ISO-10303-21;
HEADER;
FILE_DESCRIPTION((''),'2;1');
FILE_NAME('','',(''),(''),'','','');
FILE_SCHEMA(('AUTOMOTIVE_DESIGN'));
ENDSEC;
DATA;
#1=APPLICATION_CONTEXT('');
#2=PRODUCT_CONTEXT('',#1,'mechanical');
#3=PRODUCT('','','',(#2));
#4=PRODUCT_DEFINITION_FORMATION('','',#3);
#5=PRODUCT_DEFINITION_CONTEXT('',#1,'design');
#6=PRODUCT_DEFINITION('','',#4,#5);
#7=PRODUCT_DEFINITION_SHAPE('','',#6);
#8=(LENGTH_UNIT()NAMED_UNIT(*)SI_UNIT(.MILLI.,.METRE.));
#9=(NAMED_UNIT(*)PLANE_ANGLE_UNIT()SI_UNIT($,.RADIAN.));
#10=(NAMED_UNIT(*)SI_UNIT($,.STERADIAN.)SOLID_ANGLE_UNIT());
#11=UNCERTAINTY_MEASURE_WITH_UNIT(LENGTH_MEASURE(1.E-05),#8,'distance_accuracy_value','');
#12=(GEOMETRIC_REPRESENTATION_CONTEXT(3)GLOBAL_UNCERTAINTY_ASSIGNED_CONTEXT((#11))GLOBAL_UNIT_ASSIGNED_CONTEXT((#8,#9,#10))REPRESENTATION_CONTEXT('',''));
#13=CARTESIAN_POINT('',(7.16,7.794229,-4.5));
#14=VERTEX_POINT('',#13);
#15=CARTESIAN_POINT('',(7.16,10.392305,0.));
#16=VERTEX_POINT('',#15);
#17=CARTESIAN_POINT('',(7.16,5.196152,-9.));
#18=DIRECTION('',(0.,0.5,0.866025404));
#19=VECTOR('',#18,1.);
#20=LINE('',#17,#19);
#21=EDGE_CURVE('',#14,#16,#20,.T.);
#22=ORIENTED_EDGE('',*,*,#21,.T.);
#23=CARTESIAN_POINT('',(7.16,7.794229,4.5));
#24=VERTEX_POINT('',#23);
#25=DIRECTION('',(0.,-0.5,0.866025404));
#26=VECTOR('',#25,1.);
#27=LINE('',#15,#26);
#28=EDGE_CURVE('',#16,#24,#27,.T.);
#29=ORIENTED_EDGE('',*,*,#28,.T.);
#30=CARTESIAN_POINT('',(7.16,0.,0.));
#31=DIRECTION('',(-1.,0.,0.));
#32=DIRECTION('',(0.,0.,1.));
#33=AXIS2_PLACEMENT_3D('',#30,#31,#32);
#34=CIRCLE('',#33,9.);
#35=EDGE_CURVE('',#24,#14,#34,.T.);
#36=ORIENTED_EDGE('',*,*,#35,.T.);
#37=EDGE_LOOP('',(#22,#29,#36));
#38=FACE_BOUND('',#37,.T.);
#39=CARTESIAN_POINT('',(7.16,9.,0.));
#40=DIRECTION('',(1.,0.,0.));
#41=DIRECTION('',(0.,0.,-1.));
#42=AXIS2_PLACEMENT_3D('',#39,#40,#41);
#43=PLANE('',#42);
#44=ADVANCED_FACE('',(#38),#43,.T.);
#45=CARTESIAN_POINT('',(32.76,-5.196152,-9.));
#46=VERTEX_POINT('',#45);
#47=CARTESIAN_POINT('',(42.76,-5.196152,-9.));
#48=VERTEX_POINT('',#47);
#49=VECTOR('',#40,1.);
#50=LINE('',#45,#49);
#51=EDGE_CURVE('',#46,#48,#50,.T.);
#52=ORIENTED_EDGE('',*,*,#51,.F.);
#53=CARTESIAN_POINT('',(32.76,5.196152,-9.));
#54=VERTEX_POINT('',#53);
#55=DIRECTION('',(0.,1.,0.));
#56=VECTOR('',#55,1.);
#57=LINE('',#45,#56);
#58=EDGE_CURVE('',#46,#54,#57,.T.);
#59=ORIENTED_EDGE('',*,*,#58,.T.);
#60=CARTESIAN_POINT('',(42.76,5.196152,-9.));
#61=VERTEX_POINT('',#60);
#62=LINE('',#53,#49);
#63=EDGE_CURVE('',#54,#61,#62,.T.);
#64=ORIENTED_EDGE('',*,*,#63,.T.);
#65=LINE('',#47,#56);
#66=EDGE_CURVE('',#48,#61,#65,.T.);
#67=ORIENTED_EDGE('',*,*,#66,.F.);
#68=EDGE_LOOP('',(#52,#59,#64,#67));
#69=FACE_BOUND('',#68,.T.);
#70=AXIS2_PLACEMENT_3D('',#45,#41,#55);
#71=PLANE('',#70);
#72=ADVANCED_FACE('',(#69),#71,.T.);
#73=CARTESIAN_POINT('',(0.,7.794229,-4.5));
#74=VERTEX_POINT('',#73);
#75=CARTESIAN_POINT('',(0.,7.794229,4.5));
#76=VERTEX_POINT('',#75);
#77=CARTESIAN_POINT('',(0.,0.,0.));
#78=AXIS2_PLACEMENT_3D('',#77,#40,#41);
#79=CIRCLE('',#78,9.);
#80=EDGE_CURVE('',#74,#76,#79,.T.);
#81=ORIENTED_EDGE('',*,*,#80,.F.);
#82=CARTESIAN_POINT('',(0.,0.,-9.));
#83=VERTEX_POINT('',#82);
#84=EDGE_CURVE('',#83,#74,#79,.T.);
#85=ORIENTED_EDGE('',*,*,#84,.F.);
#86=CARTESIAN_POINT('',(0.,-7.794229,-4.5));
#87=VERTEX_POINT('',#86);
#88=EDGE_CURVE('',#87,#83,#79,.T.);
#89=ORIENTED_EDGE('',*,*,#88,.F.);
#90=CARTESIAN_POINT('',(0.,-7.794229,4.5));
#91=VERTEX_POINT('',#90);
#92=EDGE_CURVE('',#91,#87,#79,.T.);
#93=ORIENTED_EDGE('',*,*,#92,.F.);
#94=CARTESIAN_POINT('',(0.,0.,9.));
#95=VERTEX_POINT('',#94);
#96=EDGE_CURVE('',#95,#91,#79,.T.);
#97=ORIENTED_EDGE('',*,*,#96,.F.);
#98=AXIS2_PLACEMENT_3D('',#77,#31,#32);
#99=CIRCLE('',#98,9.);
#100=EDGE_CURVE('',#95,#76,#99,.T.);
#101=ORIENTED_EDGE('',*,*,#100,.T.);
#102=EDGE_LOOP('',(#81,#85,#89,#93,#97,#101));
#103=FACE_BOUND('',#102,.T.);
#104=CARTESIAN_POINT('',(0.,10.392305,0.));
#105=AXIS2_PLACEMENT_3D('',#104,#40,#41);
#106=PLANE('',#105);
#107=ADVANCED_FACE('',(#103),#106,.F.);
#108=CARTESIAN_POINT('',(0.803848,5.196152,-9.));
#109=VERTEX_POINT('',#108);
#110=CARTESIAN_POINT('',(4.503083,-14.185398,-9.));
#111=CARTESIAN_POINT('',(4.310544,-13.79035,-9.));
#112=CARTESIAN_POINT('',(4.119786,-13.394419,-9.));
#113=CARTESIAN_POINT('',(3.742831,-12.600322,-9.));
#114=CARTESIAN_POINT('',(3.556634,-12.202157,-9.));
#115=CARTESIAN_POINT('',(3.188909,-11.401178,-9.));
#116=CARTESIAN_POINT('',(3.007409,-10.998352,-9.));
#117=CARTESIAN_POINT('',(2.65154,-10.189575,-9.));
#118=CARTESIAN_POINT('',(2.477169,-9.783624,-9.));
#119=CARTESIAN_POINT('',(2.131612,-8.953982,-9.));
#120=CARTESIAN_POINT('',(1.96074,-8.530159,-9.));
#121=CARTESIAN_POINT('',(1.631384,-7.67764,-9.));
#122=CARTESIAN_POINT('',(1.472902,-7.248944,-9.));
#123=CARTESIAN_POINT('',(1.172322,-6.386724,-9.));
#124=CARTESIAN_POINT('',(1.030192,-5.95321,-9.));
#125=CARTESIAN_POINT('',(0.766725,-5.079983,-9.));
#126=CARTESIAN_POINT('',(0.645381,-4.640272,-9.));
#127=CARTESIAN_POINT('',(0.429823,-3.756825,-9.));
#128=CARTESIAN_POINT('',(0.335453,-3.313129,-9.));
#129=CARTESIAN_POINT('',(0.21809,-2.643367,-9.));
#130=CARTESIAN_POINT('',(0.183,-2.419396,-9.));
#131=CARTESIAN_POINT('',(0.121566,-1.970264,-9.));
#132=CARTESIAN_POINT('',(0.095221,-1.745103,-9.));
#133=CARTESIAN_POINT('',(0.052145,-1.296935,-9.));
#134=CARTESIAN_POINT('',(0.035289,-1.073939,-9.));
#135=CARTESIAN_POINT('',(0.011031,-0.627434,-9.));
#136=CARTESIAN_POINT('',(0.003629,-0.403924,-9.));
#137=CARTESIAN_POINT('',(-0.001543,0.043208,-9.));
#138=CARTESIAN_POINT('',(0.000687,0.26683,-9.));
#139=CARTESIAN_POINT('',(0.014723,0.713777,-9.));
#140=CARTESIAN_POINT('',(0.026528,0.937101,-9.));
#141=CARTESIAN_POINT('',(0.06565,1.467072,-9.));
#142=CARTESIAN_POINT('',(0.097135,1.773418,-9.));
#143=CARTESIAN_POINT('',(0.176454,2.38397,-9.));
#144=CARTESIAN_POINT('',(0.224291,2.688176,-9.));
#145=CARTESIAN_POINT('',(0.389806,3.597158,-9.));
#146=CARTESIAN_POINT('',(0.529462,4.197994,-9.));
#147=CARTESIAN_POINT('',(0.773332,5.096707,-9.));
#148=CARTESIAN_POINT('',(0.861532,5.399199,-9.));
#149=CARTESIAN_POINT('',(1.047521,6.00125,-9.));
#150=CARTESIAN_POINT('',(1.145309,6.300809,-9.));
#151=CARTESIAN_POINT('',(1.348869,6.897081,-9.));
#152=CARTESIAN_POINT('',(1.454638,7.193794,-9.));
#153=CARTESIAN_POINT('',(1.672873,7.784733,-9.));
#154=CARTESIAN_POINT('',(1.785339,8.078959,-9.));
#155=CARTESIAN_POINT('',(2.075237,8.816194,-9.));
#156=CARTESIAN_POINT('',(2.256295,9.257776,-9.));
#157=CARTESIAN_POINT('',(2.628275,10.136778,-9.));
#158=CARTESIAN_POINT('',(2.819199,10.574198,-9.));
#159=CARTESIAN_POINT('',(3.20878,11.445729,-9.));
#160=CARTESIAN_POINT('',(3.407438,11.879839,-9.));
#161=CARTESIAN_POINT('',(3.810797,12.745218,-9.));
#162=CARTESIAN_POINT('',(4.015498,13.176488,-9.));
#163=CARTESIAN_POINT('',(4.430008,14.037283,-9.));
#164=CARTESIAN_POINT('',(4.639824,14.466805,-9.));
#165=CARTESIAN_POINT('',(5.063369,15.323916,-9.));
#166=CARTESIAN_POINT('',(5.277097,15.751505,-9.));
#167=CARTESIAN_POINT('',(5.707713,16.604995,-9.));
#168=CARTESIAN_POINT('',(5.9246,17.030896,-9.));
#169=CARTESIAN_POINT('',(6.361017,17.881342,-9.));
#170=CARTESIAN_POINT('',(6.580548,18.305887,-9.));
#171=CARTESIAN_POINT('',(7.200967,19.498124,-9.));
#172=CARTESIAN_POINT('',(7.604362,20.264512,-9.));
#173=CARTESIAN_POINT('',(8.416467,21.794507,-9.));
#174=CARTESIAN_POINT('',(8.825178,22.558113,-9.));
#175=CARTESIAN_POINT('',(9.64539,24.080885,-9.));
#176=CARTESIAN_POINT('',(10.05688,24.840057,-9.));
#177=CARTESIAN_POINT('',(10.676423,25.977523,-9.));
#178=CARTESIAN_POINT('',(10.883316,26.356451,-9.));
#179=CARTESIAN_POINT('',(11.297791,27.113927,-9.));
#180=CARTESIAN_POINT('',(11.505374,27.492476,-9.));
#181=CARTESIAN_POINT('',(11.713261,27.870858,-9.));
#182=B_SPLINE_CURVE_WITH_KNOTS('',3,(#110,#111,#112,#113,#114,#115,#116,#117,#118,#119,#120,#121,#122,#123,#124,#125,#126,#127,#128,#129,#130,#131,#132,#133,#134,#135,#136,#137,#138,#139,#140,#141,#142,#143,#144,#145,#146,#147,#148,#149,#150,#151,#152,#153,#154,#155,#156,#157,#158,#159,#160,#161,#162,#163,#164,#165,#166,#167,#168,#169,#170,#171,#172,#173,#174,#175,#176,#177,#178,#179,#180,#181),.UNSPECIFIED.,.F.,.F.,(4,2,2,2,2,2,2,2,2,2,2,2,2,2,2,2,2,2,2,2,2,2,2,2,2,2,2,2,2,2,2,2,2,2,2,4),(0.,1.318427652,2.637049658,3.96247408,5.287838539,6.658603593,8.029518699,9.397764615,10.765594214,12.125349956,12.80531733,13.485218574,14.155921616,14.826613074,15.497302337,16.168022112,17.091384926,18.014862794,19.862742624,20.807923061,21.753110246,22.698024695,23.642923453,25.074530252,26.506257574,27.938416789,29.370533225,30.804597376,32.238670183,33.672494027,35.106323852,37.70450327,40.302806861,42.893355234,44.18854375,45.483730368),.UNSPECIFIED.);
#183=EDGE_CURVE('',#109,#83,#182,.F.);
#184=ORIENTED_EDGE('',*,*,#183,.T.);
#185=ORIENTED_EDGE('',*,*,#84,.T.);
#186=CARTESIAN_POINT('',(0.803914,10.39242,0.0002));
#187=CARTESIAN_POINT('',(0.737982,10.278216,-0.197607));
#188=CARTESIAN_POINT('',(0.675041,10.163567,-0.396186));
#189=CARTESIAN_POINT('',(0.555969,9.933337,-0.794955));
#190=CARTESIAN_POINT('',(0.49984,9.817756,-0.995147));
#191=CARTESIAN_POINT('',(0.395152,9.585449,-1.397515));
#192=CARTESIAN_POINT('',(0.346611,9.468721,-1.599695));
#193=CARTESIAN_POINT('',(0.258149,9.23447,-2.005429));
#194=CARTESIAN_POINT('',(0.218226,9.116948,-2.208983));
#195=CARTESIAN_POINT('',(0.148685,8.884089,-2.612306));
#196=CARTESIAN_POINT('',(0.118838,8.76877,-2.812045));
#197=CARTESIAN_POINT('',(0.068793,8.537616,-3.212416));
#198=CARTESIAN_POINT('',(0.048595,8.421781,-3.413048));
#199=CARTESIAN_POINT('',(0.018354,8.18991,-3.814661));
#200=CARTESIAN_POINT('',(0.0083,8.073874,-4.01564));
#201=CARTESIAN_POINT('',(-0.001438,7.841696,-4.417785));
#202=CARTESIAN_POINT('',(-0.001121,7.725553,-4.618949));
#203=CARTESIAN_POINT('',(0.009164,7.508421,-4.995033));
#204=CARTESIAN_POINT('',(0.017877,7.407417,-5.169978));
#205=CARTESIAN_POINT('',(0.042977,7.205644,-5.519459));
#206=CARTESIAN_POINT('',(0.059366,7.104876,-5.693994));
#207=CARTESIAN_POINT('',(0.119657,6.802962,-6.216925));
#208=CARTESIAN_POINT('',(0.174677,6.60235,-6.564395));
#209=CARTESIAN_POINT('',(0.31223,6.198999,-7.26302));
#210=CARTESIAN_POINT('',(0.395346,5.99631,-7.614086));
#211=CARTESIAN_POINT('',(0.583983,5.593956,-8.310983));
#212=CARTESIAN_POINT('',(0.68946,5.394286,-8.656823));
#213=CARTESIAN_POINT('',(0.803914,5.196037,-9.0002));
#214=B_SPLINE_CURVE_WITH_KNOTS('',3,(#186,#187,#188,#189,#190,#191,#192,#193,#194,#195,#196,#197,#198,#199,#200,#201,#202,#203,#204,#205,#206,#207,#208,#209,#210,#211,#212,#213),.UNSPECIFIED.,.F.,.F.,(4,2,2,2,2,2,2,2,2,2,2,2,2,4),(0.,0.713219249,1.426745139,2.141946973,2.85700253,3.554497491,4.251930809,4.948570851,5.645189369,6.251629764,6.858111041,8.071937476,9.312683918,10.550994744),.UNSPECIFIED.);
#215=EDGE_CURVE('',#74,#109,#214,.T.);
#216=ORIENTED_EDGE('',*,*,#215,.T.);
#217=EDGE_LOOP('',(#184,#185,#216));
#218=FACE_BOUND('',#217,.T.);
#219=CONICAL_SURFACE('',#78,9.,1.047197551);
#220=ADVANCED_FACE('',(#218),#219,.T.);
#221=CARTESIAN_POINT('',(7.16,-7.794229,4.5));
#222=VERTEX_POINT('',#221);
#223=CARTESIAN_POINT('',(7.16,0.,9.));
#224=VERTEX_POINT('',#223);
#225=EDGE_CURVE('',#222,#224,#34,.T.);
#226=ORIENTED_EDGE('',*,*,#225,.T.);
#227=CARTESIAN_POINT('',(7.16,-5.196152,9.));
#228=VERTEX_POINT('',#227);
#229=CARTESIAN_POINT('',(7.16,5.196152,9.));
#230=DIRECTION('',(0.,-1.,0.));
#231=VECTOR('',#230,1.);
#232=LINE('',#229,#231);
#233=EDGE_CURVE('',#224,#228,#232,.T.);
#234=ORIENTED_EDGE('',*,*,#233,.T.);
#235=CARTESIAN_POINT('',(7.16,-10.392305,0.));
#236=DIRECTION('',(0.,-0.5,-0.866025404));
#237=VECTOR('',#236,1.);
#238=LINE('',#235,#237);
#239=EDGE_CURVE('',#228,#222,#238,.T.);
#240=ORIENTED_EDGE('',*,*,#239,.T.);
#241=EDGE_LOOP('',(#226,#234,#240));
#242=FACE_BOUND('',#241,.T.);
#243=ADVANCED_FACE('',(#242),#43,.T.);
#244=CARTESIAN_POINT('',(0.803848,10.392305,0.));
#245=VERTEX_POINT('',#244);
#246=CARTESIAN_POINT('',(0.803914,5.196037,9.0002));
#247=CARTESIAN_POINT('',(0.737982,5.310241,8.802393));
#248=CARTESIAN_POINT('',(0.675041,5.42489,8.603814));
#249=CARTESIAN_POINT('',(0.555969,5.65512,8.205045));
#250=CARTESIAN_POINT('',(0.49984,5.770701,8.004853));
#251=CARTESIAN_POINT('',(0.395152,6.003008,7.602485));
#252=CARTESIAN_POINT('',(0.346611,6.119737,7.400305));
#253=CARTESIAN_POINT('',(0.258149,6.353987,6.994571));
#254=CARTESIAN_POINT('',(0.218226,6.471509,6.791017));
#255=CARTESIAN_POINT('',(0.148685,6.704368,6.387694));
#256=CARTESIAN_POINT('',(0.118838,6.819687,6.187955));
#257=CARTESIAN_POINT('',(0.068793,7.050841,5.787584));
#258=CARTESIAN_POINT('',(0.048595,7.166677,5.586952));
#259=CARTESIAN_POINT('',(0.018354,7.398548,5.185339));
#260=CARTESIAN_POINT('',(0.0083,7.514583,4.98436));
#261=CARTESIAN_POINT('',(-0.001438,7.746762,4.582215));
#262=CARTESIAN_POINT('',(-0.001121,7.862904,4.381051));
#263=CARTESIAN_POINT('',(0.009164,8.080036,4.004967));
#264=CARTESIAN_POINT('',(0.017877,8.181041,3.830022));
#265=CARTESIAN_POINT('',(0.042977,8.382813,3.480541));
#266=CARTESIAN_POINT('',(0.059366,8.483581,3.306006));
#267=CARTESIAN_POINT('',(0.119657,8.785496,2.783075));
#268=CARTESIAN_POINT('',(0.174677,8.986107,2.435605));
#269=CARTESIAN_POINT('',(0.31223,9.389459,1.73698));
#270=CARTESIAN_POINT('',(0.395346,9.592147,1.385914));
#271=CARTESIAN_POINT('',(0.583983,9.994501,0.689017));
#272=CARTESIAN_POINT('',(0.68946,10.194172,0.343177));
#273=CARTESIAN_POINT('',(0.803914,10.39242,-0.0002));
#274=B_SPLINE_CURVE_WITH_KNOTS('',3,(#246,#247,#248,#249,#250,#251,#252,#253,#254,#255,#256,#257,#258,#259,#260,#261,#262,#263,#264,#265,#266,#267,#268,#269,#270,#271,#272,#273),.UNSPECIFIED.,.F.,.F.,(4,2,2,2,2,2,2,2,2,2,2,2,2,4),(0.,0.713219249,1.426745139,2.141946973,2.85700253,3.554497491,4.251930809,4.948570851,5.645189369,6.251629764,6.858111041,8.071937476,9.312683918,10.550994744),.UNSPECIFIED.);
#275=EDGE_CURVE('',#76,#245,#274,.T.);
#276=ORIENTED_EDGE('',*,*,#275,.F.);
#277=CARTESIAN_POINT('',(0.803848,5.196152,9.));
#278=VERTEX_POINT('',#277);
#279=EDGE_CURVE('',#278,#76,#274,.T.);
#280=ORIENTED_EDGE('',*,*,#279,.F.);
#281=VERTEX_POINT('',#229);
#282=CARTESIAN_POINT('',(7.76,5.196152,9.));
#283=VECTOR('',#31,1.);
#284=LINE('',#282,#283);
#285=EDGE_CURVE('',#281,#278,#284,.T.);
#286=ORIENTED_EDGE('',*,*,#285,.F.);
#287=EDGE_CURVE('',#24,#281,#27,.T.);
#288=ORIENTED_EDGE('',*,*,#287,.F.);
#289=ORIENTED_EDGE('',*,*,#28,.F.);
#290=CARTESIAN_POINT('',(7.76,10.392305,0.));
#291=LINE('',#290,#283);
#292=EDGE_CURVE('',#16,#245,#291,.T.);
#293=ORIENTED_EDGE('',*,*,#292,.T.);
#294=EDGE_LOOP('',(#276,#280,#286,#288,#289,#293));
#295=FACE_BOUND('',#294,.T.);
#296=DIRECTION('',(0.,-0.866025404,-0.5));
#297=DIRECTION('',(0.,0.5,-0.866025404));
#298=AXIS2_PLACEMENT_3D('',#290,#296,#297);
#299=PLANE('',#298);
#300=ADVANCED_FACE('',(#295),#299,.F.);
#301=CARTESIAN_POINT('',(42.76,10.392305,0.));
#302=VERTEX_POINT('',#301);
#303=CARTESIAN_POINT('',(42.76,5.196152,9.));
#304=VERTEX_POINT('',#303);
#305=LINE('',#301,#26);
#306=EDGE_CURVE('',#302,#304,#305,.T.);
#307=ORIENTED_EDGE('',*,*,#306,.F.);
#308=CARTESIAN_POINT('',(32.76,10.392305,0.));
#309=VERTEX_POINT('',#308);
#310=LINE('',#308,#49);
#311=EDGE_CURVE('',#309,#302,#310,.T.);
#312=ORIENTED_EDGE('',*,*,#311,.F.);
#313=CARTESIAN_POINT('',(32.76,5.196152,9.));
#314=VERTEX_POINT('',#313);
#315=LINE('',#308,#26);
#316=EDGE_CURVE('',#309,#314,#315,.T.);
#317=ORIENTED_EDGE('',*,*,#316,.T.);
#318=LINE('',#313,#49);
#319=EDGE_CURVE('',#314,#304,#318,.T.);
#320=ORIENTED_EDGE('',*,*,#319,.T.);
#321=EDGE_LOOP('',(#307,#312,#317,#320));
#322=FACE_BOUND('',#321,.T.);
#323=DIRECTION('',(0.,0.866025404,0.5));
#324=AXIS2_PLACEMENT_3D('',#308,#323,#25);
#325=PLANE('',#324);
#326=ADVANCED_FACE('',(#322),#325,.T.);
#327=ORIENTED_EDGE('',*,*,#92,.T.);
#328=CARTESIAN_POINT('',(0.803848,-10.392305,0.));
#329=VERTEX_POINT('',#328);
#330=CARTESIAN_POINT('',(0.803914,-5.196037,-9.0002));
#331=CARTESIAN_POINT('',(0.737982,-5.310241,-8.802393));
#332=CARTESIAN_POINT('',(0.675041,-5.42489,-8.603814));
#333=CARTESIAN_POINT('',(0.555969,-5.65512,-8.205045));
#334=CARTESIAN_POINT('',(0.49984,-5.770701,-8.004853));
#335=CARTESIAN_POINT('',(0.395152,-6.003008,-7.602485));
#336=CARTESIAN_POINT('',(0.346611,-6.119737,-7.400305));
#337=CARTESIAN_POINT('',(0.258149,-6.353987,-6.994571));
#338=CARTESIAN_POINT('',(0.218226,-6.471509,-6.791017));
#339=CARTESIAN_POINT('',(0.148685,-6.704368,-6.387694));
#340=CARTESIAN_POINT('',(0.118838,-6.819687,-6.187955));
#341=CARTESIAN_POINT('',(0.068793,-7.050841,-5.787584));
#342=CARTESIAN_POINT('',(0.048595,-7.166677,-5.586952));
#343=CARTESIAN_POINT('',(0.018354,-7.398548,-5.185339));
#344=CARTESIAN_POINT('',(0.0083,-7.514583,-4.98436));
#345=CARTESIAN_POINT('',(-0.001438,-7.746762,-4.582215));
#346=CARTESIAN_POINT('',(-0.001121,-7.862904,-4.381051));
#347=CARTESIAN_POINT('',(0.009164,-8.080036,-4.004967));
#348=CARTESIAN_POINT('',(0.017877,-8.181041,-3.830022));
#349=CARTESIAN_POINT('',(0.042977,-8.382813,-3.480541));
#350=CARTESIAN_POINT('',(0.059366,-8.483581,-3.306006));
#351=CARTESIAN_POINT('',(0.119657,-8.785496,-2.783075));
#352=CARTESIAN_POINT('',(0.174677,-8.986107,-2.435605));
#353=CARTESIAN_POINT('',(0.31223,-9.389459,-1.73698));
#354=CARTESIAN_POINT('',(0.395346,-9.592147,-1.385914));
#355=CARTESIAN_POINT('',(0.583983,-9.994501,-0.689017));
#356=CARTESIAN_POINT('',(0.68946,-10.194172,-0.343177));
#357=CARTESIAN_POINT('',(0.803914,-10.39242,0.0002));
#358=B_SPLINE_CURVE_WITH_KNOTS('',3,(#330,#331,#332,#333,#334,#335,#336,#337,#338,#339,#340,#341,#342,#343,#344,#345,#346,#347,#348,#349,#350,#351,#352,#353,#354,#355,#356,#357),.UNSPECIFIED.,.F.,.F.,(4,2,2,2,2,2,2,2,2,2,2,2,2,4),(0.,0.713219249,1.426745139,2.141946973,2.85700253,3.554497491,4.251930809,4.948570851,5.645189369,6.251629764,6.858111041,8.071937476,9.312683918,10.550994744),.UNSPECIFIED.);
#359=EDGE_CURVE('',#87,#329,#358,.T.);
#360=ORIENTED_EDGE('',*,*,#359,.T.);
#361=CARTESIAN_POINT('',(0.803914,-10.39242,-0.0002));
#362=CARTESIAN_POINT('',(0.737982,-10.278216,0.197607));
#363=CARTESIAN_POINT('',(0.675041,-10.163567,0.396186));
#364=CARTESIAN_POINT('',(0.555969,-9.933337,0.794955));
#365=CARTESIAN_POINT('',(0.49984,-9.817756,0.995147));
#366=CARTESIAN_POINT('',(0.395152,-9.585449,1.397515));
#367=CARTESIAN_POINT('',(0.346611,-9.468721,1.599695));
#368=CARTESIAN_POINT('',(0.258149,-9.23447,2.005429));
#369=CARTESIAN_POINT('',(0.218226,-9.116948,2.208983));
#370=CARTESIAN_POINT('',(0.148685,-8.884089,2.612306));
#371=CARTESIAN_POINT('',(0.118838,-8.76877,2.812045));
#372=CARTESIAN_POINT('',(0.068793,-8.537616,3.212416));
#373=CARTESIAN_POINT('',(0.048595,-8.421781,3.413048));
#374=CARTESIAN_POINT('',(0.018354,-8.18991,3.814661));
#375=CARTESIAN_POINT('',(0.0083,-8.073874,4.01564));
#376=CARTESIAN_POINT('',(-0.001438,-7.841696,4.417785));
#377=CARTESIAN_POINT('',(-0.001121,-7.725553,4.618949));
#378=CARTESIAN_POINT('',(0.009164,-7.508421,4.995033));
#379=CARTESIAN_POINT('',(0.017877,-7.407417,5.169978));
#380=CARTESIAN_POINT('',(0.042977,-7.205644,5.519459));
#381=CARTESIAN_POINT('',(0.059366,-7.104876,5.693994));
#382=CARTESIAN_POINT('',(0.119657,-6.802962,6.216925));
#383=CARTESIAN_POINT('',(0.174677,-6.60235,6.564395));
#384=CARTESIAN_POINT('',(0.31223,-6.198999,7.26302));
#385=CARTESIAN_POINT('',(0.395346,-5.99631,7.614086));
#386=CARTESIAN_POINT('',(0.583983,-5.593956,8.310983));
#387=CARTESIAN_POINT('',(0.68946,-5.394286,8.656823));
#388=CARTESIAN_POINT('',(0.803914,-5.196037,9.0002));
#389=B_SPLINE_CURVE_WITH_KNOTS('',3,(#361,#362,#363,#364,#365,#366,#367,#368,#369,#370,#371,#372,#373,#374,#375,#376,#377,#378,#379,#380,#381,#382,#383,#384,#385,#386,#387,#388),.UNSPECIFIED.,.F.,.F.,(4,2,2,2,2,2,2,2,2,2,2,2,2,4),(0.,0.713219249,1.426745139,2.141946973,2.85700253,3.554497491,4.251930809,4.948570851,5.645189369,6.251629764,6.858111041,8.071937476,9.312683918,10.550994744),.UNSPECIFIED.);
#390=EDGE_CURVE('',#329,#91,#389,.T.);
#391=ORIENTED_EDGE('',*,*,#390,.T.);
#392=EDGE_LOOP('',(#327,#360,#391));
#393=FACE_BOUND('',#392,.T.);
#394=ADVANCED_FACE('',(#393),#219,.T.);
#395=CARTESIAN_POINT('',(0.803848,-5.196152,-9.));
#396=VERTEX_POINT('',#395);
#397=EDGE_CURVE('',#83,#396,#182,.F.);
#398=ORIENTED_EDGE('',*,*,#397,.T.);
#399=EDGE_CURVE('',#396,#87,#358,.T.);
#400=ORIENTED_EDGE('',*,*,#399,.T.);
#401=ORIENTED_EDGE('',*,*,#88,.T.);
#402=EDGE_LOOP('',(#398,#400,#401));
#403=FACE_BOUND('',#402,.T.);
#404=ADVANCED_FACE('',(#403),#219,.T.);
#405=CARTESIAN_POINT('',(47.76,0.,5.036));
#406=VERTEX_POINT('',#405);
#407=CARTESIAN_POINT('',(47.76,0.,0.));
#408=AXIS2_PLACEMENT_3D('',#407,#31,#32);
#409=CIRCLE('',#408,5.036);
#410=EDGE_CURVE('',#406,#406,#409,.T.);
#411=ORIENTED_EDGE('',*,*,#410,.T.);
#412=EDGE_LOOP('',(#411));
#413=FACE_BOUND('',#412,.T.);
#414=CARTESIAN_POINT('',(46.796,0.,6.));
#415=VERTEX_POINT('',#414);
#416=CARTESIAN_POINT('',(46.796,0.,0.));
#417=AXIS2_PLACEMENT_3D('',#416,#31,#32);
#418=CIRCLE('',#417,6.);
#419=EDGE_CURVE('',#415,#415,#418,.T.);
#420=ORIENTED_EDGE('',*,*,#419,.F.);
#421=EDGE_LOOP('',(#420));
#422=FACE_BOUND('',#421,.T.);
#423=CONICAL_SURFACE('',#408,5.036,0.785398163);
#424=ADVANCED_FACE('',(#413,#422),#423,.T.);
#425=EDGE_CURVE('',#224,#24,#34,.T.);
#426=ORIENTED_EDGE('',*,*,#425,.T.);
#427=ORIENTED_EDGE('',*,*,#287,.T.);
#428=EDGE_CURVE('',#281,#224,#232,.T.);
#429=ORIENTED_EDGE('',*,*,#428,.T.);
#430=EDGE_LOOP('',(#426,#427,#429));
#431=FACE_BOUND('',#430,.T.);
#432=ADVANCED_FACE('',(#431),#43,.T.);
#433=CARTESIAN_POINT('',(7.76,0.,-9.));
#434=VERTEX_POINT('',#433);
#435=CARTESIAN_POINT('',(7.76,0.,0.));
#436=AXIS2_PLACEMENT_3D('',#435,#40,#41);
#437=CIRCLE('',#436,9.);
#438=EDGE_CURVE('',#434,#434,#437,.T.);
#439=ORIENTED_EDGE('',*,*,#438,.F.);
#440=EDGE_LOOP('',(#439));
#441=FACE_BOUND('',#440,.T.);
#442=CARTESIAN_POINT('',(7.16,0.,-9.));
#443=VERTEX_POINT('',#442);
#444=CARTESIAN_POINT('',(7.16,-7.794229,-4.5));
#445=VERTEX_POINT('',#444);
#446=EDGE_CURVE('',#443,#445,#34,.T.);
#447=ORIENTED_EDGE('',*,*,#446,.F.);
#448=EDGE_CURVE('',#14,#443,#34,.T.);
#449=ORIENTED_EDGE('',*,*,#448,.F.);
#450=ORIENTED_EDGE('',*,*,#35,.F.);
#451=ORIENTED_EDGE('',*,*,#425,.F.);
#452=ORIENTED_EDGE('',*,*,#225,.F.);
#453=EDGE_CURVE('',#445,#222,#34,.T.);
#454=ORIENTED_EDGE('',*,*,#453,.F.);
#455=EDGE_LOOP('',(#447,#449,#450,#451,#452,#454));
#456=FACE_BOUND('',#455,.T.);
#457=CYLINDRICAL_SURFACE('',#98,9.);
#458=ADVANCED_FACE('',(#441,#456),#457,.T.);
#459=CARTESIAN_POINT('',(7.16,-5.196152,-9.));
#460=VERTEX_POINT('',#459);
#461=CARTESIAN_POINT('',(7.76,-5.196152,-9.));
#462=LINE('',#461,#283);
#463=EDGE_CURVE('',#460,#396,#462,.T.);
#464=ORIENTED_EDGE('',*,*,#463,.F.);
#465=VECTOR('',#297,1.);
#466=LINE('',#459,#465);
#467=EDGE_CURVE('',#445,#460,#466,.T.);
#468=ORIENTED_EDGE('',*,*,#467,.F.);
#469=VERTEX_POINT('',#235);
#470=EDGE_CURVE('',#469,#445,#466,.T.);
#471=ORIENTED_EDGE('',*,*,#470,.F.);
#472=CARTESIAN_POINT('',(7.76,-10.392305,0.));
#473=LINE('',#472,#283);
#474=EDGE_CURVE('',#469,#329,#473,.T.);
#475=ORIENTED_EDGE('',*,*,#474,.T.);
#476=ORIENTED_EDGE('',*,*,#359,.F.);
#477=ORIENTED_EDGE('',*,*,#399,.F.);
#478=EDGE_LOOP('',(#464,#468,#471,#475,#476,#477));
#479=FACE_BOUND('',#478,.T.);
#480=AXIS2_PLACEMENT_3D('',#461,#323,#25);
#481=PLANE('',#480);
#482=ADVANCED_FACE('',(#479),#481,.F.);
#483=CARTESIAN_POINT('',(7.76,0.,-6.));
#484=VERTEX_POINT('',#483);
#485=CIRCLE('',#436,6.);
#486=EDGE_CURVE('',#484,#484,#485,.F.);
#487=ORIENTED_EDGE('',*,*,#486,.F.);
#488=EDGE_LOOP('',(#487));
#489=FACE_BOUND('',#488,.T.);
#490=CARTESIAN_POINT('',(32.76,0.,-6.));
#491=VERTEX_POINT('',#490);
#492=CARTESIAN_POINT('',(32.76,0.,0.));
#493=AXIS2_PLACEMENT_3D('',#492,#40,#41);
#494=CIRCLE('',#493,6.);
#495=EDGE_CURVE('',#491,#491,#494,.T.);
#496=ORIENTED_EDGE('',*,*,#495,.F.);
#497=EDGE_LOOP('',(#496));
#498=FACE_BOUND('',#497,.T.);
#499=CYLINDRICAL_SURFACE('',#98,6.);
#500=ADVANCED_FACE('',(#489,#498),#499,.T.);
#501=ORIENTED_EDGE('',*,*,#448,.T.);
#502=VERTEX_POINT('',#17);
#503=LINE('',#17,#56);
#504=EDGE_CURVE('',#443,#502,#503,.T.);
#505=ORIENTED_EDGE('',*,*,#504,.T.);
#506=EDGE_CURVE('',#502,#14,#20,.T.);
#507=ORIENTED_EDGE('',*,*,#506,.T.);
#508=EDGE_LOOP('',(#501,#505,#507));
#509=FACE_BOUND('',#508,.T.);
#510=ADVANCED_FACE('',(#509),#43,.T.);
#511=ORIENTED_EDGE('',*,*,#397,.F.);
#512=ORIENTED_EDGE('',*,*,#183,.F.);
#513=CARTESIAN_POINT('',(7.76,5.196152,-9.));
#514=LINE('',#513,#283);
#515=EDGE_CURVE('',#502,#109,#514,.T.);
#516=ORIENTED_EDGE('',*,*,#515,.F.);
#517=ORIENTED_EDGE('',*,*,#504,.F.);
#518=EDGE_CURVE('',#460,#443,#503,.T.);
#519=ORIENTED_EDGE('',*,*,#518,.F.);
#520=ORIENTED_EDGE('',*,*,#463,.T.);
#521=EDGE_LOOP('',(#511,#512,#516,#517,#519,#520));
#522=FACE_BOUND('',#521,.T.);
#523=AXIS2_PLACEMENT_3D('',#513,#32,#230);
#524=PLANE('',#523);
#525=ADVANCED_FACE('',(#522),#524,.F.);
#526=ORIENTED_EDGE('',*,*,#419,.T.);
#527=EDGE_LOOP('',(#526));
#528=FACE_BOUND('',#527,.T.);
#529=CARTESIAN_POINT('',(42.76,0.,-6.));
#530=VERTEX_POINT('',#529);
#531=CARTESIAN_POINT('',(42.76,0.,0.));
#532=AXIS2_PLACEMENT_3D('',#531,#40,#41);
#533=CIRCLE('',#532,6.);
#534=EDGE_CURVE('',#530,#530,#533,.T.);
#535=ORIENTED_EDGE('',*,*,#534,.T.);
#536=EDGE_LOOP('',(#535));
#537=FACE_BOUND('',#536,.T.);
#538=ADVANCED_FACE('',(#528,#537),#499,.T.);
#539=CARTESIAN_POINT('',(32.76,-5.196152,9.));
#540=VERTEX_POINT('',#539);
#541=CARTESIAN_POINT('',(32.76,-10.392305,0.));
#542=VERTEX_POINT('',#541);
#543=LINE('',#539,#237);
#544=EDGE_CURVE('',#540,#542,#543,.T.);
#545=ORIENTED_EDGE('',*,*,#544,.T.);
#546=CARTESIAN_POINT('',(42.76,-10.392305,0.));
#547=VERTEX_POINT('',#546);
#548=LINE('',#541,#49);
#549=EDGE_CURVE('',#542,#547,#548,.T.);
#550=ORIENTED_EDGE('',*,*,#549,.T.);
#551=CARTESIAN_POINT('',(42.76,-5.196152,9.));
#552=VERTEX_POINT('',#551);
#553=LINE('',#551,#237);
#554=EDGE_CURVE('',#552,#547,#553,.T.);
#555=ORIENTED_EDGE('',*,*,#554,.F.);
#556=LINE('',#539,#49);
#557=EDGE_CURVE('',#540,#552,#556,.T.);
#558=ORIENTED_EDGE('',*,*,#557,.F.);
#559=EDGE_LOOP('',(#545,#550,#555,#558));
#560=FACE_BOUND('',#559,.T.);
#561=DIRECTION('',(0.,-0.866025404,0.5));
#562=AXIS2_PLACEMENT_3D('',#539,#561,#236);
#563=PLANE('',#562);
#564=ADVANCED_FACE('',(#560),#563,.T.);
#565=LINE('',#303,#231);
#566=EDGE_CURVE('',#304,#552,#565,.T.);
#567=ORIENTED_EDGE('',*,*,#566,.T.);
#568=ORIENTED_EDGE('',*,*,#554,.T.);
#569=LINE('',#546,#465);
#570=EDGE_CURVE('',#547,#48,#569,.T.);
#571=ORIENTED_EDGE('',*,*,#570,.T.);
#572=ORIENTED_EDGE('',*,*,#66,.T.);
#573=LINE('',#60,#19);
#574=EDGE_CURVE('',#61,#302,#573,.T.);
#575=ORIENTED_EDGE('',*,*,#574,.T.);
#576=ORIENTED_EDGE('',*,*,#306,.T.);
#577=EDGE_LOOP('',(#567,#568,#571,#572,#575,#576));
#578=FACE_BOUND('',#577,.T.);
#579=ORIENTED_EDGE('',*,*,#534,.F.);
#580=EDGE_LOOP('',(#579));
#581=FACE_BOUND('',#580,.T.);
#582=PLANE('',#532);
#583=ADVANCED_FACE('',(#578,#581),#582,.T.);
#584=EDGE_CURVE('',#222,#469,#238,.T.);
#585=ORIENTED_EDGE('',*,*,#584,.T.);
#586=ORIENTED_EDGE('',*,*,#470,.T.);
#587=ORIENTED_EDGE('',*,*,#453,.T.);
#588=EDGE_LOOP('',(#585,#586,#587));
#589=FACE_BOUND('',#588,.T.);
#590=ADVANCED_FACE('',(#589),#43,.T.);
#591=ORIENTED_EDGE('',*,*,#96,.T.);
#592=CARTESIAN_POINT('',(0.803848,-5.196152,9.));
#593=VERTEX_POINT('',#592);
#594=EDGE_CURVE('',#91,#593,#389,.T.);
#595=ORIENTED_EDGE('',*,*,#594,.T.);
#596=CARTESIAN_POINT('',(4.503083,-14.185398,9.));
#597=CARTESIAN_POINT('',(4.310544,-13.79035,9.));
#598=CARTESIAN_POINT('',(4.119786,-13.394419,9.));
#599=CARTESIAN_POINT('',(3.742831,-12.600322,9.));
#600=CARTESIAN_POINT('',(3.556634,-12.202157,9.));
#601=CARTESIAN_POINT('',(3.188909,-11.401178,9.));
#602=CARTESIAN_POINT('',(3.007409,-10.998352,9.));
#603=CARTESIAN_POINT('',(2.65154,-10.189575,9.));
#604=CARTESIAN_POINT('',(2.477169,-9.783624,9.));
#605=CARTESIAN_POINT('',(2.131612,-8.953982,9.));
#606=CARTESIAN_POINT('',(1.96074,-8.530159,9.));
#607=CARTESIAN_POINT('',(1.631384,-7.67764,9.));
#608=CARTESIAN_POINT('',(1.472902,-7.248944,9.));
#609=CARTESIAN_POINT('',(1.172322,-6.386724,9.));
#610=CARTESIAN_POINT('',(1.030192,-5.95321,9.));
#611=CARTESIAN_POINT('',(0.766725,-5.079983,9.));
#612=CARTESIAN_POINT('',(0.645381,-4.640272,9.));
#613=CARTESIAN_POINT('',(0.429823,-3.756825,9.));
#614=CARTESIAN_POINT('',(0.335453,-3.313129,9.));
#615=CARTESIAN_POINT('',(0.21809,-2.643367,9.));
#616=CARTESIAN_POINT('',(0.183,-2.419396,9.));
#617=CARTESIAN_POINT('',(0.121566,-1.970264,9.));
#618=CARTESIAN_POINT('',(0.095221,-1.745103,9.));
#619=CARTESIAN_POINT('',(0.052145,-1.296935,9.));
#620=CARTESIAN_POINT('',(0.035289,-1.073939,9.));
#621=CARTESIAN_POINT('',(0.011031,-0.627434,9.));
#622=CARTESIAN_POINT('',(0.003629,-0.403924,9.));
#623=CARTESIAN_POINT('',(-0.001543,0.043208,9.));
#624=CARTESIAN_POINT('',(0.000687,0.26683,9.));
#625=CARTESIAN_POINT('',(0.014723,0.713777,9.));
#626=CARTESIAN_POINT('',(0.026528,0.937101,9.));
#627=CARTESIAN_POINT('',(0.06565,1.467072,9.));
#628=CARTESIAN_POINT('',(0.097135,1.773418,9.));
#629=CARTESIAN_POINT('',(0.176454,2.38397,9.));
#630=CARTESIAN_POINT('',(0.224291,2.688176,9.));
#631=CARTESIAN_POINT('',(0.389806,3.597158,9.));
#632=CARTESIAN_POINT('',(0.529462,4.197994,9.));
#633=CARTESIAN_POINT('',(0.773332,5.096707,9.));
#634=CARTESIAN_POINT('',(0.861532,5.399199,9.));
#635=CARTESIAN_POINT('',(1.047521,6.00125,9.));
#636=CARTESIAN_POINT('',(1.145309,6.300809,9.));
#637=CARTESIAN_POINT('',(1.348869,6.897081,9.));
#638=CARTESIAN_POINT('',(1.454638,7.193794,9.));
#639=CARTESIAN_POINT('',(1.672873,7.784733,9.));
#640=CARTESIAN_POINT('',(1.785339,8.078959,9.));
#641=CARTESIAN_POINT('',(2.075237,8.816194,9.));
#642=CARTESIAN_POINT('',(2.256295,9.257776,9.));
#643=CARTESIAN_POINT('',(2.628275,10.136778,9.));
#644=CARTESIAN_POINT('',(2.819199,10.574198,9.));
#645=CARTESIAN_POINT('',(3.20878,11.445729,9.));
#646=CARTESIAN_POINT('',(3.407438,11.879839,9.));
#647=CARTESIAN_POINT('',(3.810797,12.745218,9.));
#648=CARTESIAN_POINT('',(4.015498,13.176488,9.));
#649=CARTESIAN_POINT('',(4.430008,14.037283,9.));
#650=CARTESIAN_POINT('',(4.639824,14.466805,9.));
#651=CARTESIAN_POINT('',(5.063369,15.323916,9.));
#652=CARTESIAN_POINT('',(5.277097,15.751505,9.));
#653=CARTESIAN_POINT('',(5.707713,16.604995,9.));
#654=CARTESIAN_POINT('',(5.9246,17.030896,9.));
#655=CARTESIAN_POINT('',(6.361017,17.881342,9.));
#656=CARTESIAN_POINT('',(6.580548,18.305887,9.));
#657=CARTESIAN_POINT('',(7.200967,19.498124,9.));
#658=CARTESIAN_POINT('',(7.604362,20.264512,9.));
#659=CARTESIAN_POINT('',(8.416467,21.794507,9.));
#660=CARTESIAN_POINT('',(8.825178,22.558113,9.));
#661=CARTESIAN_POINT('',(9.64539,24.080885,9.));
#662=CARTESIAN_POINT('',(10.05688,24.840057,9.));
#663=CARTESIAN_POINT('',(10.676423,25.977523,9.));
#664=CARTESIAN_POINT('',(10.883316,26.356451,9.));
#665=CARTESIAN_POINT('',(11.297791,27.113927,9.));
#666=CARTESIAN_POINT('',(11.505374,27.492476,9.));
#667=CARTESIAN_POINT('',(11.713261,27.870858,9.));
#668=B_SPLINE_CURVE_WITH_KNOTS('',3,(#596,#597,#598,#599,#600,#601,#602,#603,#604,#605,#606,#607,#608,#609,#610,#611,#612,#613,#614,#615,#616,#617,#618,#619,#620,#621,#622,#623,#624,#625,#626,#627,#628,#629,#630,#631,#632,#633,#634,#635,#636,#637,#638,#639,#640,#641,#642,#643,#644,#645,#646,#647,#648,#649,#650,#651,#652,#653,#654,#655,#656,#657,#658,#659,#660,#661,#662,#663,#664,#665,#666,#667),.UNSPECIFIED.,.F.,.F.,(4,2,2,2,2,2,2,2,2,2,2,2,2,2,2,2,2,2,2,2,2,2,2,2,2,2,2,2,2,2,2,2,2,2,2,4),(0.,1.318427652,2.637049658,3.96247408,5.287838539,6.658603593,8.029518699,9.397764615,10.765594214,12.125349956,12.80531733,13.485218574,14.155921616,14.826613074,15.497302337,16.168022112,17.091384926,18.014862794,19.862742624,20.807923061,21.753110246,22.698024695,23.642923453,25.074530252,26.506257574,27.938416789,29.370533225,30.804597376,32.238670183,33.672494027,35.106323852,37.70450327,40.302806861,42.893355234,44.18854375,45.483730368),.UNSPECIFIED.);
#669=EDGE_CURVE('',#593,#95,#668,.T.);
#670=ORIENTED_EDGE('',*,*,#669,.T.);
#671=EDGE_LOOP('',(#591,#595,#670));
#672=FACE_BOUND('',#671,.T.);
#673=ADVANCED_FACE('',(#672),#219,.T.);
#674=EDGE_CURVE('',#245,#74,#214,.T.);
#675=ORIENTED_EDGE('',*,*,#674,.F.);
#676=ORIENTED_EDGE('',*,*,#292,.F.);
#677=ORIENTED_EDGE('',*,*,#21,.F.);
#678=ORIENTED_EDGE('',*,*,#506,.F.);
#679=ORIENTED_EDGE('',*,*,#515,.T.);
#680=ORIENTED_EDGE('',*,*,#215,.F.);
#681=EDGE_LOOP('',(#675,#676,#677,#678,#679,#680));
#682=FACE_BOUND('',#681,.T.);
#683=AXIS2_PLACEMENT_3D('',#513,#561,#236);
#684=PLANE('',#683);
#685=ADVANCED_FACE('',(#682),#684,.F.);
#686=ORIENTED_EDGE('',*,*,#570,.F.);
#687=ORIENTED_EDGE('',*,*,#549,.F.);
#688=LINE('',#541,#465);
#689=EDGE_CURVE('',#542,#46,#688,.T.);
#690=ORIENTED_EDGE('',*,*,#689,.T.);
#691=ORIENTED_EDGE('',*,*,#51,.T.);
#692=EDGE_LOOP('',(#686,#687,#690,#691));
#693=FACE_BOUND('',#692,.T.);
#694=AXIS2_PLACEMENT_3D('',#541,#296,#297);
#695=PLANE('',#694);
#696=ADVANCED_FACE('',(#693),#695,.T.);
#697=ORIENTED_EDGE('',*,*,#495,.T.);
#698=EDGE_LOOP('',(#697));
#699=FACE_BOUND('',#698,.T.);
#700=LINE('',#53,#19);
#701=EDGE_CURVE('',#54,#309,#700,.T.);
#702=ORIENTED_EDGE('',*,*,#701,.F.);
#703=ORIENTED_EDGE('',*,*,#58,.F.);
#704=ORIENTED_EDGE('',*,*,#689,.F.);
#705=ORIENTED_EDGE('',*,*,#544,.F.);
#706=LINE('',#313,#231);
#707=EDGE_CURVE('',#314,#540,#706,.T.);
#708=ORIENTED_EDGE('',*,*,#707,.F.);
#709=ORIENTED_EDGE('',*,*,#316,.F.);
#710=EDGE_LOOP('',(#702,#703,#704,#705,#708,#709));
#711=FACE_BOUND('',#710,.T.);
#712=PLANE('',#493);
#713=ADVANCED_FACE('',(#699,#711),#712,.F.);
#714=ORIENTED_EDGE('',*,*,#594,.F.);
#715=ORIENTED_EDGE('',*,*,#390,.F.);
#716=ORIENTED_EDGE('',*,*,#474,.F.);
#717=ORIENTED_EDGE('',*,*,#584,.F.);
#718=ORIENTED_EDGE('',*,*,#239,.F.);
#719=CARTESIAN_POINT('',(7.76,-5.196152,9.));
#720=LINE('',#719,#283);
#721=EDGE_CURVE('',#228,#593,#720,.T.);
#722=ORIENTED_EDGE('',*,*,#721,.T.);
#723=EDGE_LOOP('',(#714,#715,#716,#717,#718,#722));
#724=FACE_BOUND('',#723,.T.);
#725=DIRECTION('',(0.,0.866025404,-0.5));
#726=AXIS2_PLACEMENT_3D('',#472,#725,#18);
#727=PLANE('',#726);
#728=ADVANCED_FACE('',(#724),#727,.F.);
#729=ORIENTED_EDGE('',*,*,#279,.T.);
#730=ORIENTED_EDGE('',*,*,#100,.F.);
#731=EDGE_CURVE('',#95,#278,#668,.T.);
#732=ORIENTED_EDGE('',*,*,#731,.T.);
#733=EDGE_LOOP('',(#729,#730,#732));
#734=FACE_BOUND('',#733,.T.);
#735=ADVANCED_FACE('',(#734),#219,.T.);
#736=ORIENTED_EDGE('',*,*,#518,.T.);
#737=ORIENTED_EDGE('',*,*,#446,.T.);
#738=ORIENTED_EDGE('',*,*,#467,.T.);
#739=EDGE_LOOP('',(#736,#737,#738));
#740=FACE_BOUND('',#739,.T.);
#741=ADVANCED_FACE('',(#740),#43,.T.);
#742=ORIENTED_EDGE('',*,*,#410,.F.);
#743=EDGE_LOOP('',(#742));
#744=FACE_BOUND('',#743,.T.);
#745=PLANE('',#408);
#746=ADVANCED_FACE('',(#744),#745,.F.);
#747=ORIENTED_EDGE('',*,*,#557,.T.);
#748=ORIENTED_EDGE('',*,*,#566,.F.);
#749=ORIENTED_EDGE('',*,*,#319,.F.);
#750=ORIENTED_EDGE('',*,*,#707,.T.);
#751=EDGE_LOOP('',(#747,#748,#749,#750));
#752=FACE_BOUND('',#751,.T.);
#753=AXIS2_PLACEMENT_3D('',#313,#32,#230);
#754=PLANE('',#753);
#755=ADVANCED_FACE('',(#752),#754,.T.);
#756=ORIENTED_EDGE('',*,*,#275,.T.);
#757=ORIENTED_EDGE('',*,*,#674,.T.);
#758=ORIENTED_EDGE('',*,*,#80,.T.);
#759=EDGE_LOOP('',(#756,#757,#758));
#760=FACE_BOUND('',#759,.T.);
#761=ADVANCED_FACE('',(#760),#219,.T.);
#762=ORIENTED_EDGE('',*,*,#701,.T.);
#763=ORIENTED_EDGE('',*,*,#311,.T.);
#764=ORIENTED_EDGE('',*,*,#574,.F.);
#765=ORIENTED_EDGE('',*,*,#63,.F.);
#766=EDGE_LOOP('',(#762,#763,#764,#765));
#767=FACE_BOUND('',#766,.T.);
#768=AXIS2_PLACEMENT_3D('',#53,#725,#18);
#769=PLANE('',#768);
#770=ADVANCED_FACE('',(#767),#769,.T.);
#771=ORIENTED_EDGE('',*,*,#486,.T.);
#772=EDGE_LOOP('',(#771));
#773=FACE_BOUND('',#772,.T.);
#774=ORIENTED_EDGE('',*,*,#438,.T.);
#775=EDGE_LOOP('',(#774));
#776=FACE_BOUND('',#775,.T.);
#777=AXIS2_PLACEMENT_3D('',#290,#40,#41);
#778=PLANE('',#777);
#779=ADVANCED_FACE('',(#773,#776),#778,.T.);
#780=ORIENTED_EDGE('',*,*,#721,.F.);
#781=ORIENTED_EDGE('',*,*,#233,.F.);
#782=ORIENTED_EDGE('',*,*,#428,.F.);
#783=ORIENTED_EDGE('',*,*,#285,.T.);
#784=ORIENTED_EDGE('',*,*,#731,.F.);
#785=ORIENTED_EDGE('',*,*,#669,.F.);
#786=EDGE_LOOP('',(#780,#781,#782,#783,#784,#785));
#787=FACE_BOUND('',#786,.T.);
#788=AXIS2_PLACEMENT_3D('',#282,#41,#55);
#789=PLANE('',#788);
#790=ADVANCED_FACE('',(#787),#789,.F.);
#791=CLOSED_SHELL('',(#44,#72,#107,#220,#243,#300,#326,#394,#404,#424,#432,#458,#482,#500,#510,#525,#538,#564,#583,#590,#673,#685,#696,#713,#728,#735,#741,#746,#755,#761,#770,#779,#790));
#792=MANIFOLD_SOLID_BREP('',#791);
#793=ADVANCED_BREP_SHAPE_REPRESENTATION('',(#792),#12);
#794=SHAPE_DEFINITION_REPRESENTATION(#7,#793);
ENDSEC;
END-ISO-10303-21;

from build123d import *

# Parameters (mm, degrees)
BASEHEAD_DEPTH      = 7.76
SKETCH4_W           = 0.6
SKETCH4_H           = 11.392304845
BOSS_EXTRUDE1_DEPTH = 10


# Read off the part's stored shape, not the designer's step: HeadChamfer
with BuildPart() as part:
    # Sketch1 → BaseHead (new body)
    with BuildSketch(Plane(origin=(0, 0, 0), x_dir=(0, 0, -1), z_dir=(1, 0, 0))):
        Polygon((9, 5.196152423), (9, -5.196152423), (0, -10.392304845), (-9, -5.196152423), (-9, 5.196152423), (0, 10.392304845), align=None)
    extrude(amount=BASEHEAD_DEPTH)

    # HeadChamfer outline → HeadChamfer (revolve, cut)
    with BuildSketch(Plane.YX):
        Polygon((10.392304847, 0.803847578), (9, 0), (10.392304847, 0), align=None)
    revolve(axis=Axis((0, 0, 0), (1, 0, 0)), mode=Mode.SUBTRACT)

    # HeadChamfer 2 outline → HeadChamfer 2 (revolve)
    with BuildSketch(Plane.YX):
        Polygon((6, 7.76), (6, 46.796), (5.036, 47.76), (0, 47.76), (0, 7.76), align=None)
    revolve(axis=Axis((0, 0, 0), (1, 0, 0)))

    # Sketch4 → BearingFace (revolve, cut)
    with BuildSketch(Plane.XY, mode=Mode.PRIVATE) as bearingface_sk:
        with Locations((7.46, 14.696152423)):
            Rectangle(SKETCH4_W, SKETCH4_H)
    revolve(bearingface_sk.sketch.rotate(Axis((0, 0, 0), (1, 0, 0)), 90), axis=Axis((0, 0, 0), (1, 0, 0)), mode=Mode.SUBTRACT)

    # Sketch5 → Boss-Extrude1 (add)
    with BuildSketch(Plane(origin=(42.76, 0, 0), x_dir=(0, 0, -1), z_dir=(1, 0, 0))):
        Polygon((0, 10.392304845), (-9, 5.196152423), (-9, -5.196152423), (0, -10.392304845), (9, -5.196152423), (9, 5.196152423), align=None)
    extrude(amount=-BOSS_EXTRUDE1_DEPTH)


solid = part.part
